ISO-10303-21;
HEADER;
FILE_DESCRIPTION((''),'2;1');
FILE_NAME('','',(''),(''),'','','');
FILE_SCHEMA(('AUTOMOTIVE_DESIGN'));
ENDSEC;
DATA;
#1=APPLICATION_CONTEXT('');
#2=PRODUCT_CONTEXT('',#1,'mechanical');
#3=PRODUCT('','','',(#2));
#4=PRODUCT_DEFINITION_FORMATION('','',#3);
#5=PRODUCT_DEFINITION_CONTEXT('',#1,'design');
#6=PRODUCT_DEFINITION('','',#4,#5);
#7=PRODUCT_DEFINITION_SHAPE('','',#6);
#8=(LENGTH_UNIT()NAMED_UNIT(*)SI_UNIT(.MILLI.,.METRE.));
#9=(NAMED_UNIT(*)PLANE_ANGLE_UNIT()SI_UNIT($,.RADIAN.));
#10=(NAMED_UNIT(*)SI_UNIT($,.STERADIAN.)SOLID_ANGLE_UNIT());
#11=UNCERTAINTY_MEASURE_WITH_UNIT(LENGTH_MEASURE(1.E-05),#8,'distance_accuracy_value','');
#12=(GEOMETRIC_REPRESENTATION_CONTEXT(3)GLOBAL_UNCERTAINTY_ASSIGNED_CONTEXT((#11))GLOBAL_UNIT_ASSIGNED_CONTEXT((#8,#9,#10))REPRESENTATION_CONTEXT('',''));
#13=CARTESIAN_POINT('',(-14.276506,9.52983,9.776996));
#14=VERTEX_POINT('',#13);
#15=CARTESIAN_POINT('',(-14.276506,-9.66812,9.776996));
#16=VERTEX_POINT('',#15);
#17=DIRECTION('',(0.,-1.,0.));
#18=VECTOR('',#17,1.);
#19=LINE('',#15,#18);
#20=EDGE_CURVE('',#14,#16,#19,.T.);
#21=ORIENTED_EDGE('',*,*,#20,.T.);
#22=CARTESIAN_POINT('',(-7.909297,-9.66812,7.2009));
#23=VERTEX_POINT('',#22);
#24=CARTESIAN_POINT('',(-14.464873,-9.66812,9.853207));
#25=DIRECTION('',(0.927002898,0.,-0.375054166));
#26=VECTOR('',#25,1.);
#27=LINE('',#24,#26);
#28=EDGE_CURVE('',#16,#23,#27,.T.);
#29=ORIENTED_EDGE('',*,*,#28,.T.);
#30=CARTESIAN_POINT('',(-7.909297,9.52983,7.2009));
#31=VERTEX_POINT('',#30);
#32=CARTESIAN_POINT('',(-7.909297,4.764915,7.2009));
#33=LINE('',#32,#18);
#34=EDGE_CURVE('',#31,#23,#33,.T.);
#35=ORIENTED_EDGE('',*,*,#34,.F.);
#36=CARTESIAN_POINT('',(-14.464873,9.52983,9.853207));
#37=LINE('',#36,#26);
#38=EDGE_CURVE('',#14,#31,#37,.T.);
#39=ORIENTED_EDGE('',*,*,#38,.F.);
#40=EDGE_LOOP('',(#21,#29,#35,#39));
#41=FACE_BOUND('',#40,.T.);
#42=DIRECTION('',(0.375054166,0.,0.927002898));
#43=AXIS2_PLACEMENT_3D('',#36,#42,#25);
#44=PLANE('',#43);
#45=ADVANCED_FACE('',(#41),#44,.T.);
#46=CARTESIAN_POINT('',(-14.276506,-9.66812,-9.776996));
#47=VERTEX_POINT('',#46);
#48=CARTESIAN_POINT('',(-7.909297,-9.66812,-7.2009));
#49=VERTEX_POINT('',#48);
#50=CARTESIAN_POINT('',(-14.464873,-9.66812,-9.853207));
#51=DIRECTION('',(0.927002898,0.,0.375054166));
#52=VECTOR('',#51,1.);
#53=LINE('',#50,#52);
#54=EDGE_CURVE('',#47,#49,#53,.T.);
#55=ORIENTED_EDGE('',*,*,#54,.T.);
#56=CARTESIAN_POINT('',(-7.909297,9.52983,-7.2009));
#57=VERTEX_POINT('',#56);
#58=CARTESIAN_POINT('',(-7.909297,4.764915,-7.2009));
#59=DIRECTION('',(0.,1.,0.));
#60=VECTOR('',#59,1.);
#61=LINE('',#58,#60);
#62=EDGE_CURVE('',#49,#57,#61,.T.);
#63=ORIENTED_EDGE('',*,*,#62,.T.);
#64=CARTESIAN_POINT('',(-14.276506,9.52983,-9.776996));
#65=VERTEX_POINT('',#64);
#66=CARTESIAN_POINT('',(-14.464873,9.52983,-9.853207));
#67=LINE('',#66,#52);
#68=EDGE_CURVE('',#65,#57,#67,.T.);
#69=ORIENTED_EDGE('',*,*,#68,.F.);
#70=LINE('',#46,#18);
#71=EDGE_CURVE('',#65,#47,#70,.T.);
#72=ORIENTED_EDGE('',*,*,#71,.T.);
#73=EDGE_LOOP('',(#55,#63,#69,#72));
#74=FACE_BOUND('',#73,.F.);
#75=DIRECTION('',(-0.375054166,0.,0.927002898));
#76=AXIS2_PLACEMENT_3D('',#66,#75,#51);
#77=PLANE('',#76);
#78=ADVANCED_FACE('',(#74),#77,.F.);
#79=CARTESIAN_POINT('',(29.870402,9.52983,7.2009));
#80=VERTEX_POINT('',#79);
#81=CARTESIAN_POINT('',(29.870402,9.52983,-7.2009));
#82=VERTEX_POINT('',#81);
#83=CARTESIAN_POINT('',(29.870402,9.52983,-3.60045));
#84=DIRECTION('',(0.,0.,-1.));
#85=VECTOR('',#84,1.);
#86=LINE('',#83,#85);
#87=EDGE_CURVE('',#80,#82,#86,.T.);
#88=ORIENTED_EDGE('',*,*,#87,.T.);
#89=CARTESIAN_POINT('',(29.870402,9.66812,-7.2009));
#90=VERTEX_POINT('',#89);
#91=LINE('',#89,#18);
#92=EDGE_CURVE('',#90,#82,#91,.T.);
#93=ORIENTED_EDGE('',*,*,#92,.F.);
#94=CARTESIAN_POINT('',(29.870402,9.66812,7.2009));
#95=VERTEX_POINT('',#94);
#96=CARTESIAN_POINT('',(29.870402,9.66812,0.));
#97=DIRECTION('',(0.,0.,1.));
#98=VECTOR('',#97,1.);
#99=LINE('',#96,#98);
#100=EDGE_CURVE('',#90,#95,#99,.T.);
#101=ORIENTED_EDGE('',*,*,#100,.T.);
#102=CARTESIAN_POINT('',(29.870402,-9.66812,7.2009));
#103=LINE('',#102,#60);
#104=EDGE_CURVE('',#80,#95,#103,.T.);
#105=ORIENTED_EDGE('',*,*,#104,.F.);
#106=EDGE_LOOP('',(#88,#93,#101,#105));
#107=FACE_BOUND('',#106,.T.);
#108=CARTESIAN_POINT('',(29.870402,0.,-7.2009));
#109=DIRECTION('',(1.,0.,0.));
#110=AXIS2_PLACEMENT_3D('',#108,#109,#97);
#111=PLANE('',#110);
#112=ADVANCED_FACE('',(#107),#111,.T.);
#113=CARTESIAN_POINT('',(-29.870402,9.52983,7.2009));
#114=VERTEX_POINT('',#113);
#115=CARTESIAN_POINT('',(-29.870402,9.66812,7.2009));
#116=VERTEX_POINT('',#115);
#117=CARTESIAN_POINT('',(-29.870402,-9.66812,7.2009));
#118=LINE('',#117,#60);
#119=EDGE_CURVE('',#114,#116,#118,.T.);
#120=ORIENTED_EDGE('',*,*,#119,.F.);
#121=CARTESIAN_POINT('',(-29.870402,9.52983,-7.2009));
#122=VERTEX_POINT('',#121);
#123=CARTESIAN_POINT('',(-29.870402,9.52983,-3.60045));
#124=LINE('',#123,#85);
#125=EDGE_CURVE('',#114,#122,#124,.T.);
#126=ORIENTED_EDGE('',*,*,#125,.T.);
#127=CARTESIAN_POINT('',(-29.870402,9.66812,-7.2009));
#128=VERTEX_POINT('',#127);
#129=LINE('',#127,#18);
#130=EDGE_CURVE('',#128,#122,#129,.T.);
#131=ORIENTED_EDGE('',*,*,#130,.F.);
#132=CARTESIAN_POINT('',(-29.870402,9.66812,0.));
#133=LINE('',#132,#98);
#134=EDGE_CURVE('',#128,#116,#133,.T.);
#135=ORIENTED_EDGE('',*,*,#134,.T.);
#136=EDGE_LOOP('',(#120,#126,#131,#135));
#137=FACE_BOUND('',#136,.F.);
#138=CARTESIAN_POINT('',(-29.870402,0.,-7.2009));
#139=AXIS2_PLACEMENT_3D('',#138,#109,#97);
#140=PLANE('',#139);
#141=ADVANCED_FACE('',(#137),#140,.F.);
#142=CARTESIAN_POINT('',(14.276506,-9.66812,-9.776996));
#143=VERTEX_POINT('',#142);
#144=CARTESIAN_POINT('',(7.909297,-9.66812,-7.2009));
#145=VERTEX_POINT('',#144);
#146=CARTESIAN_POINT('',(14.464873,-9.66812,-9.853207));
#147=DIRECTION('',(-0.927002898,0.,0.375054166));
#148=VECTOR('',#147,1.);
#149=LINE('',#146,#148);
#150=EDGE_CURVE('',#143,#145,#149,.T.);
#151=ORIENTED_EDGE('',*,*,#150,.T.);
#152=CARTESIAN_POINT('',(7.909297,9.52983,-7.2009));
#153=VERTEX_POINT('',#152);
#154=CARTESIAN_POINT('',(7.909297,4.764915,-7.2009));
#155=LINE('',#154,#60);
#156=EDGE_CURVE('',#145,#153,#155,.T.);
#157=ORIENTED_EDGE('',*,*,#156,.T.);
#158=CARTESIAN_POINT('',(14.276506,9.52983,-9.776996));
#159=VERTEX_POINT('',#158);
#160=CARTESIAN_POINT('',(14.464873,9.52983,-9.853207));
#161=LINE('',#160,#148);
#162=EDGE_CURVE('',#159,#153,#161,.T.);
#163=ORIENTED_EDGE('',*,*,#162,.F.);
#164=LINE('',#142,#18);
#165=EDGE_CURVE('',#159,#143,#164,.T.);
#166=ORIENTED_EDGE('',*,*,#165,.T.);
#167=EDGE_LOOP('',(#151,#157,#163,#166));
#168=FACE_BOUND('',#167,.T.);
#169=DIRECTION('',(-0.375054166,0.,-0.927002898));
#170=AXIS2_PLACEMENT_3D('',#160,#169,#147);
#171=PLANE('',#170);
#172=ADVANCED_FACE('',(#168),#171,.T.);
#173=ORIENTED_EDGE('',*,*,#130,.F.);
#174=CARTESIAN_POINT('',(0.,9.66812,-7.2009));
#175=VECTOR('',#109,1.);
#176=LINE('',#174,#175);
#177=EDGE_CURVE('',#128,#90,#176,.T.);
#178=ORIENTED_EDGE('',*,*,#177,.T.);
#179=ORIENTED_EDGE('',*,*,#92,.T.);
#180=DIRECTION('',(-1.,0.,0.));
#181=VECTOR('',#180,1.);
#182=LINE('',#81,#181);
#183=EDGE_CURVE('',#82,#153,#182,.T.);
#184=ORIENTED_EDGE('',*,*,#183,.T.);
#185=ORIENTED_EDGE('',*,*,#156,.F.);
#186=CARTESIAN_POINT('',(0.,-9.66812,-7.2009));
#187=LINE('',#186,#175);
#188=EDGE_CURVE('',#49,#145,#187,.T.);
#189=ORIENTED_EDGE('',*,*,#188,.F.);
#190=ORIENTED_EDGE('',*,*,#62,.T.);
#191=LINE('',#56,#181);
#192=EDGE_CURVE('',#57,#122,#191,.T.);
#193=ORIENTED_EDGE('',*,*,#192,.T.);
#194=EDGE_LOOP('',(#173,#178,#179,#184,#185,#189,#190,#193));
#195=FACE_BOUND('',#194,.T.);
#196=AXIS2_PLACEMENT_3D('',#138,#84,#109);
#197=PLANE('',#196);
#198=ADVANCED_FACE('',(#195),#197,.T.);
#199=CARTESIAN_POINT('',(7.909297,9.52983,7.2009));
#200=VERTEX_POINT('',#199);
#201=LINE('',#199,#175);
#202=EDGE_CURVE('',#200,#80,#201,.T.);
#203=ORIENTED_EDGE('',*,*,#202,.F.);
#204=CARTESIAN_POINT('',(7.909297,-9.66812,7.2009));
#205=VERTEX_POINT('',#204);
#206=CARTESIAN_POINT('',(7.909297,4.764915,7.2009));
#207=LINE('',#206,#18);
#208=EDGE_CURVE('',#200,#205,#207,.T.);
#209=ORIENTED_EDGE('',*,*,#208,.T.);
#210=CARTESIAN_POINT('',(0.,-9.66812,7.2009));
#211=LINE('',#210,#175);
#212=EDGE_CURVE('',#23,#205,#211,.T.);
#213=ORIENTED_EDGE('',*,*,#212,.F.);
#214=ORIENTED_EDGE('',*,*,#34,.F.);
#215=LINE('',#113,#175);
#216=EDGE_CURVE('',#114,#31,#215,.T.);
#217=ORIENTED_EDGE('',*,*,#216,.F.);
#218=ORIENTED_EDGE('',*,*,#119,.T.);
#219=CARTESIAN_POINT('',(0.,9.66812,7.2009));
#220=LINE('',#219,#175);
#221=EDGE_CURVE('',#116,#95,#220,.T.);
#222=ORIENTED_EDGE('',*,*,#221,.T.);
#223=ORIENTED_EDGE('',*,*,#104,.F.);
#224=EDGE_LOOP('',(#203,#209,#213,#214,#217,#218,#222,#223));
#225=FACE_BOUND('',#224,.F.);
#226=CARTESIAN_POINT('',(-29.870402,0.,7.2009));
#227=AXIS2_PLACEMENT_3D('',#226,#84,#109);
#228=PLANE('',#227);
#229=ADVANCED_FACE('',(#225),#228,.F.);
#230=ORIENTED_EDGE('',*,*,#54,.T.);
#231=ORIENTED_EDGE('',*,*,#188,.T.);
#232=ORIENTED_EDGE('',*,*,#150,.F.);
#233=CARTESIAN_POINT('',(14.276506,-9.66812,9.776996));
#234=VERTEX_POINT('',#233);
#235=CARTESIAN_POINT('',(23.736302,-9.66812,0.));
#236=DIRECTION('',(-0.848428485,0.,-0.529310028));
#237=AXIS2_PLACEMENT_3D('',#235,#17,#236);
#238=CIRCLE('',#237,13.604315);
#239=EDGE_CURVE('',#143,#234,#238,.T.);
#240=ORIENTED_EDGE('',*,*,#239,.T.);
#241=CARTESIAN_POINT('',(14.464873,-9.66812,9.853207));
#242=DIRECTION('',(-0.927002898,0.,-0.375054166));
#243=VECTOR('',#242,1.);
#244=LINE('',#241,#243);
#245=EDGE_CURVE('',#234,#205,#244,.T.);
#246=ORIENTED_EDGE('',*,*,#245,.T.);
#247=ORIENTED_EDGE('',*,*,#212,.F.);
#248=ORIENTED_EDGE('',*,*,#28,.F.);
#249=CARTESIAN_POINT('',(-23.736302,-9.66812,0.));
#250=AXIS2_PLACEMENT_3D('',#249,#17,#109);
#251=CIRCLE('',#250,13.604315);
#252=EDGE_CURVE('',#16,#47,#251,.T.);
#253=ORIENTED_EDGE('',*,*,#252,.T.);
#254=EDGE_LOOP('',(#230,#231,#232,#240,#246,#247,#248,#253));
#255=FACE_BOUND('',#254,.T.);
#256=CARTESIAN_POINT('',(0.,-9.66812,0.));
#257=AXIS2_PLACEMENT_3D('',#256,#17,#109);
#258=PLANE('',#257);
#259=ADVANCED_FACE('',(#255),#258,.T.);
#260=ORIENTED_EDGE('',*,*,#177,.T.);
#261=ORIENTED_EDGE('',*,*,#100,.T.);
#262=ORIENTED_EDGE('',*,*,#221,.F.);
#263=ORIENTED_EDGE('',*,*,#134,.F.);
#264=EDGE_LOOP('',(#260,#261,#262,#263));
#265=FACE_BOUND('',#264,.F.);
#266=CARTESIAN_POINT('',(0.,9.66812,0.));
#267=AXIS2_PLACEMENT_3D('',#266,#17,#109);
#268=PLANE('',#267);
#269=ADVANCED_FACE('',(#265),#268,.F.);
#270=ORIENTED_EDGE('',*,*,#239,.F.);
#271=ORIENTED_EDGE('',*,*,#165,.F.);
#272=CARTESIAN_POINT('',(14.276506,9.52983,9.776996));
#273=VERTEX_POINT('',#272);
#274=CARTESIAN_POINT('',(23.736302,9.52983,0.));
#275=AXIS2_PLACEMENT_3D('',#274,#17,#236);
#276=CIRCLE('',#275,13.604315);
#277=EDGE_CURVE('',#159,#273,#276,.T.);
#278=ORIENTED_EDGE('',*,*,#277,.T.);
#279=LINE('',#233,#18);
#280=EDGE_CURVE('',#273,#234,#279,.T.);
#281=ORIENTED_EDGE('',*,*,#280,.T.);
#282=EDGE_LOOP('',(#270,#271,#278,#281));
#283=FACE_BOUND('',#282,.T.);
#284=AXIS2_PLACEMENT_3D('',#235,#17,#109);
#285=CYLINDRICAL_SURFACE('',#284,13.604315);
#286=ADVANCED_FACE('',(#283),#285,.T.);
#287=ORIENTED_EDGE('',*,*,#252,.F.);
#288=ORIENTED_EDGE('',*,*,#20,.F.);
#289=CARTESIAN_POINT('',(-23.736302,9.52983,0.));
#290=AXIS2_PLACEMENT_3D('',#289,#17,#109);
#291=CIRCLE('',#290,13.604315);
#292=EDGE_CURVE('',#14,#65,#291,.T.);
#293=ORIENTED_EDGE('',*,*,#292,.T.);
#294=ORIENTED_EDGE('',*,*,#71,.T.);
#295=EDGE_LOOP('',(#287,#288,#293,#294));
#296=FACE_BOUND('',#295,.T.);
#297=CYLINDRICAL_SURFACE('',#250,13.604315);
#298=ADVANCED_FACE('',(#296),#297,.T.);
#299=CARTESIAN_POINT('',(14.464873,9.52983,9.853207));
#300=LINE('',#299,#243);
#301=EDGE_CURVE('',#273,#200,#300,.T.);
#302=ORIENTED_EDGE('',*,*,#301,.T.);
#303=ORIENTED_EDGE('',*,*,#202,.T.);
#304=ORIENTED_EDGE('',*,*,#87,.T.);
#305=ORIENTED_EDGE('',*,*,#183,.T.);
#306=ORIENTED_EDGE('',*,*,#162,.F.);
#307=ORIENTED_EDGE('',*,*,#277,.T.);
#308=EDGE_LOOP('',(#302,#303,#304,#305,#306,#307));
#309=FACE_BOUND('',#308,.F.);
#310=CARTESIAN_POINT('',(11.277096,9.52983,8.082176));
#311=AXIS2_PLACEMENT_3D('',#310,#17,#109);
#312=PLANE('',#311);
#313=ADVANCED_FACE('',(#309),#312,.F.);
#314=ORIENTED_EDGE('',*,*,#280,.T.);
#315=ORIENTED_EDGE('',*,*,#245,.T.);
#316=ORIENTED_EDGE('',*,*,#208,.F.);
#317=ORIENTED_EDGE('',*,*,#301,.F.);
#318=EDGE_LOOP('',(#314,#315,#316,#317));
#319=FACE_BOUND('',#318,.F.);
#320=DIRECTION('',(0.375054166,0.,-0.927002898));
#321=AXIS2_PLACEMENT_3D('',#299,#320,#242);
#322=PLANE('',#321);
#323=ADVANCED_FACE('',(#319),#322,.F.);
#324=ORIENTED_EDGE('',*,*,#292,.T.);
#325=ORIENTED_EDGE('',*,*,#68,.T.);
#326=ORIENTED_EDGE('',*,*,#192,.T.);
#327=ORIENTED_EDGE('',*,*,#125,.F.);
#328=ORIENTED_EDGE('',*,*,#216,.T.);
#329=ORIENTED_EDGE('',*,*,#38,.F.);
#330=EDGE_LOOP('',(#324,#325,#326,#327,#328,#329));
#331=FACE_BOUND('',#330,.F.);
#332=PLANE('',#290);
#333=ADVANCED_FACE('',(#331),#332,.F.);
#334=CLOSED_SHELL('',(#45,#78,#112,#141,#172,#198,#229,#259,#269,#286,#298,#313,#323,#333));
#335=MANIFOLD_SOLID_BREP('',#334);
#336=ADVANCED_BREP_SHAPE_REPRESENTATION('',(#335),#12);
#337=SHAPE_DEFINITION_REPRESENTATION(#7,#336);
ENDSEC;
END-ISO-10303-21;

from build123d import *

# Parameters (mm, degrees)
F0_W        = 59.7408041358
F0_H        = 14.4018009305
F1_DEPTH    = 9.66812
F2_R        = 13.6043152125
F3_DEPTH    = 19.19795
F4_T1_DEPTH = 19.19795


# Not quite as in the source:
# - a fillet or chamfer that OpenCascade refuses, or shapes differently, is made with other operations: its cross-section is extruded or revolved along the edge and cut away or added


with BuildPart() as f1:
    # F0 (on Front) → F1 (new body, symmetric)
    with BuildSketch(Plane.XZ):
        Rectangle(F0_W, F0_H)
    extrude(amount=F1_DEPTH, both=True)

    # F2 (on face) → F3 (join)
    with BuildSketch(Plane.XZ.offset(9.66812)):
        with Locations((-23.7363018095, 0)):
            Circle(F2_R)
        with Locations((23.7363018095, 0)):
            Circle(F2_R)
    extrude(amount=-F3_DEPTH)

    # F4: chamfer of 5.08 on 4 edges, made by hand

    # F4_s2 → F4_t1 (join)
    with BuildSketch(Plane.XZ.offset(-9.52983)):
        with BuildLine():
            Line((14.4648728864, 9.8532071559), (7.7209301601, 7.1246894588))
            Line((7.7209301601, 7.1246894588), (7.7209301601, 7.0230894588))
            ThreePointArc((7.7209301601, 7.0230894588), (9.9574717116, 7.0993004653), (12.194013263, 7.0993004653))
            Line((12.194013263, 7.0993004653), (12.2802135971, 7.1471225664))
            ThreePointArc((12.2802135971, 7.1471225664), (13.291854629, 8.5578526047), (14.5355207103, 9.7801904113))
            Line((14.5355207103, 9.7801904113), (14.4648728864, 9.8532071559))
        make_face()
        with BuildLine():
            Line((-14.4648728864, 9.8532071559), (-7.7209301601, 7.1246894588))
            Line((-7.7209301601, 7.1246894588), (-7.7209301601, 7.0230894588))
            ThreePointArc((-7.7209301601, 7.0230894588), (-9.9574717116, 7.0993004653), (-12.194013263, 7.0993004653))
            Line((-12.194013263, 7.0993004653), (-12.2802135971, 7.1471225664))
            ThreePointArc((-12.2802135971, 7.1471225664), (-13.291854629, 8.5578526047), (-14.5355207103, 9.7801904113))
            Line((-14.5355207103, 9.7801904113), (-14.4648728864, 9.8532071559))
        make_face()
        with BuildLine():
            Line((14.4648728864, -9.8532071559), (7.7209301601, -7.1246894588))
            Line((7.7209301601, -7.1246894588), (7.7209301601, -7.0230894588))
            ThreePointArc((7.7209301601, -7.0230894588), (9.9574717116, -7.0993004653), (12.194013263, -7.0993004653))
            Line((12.194013263, -7.0993004653), (12.2802135971, -7.1471225664))
            ThreePointArc((12.2802135971, -7.1471225664), (13.291854629, -8.5578526047), (14.5355207103, -9.7801904113))
            Line((14.5355207103, -9.7801904113), (14.4648728864, -9.8532071559))
        make_face()
        with BuildLine():
            Line((-14.4648728864, -9.8532071559), (-7.7209301601, -7.1246894588))
            Line((-7.7209301601, -7.1246894588), (-7.7209301601, -7.0230894588))
            ThreePointArc((-7.7209301601, -7.0230894588), (-9.9574717116, -7.0993004653), (-12.194013263, -7.0993004653))
            Line((-12.194013263, -7.0993004653), (-12.2802135971, -7.1471225664))
            ThreePointArc((-12.2802135971, -7.1471225664), (-13.291854629, -8.5578526047), (-14.5355207103, -9.7801904113))
            Line((-14.5355207103, -9.7801904113), (-14.4648728864, -9.8532071559))
        make_face()
    extrude(amount=F4_T1_DEPTH)


solid = f1.part
